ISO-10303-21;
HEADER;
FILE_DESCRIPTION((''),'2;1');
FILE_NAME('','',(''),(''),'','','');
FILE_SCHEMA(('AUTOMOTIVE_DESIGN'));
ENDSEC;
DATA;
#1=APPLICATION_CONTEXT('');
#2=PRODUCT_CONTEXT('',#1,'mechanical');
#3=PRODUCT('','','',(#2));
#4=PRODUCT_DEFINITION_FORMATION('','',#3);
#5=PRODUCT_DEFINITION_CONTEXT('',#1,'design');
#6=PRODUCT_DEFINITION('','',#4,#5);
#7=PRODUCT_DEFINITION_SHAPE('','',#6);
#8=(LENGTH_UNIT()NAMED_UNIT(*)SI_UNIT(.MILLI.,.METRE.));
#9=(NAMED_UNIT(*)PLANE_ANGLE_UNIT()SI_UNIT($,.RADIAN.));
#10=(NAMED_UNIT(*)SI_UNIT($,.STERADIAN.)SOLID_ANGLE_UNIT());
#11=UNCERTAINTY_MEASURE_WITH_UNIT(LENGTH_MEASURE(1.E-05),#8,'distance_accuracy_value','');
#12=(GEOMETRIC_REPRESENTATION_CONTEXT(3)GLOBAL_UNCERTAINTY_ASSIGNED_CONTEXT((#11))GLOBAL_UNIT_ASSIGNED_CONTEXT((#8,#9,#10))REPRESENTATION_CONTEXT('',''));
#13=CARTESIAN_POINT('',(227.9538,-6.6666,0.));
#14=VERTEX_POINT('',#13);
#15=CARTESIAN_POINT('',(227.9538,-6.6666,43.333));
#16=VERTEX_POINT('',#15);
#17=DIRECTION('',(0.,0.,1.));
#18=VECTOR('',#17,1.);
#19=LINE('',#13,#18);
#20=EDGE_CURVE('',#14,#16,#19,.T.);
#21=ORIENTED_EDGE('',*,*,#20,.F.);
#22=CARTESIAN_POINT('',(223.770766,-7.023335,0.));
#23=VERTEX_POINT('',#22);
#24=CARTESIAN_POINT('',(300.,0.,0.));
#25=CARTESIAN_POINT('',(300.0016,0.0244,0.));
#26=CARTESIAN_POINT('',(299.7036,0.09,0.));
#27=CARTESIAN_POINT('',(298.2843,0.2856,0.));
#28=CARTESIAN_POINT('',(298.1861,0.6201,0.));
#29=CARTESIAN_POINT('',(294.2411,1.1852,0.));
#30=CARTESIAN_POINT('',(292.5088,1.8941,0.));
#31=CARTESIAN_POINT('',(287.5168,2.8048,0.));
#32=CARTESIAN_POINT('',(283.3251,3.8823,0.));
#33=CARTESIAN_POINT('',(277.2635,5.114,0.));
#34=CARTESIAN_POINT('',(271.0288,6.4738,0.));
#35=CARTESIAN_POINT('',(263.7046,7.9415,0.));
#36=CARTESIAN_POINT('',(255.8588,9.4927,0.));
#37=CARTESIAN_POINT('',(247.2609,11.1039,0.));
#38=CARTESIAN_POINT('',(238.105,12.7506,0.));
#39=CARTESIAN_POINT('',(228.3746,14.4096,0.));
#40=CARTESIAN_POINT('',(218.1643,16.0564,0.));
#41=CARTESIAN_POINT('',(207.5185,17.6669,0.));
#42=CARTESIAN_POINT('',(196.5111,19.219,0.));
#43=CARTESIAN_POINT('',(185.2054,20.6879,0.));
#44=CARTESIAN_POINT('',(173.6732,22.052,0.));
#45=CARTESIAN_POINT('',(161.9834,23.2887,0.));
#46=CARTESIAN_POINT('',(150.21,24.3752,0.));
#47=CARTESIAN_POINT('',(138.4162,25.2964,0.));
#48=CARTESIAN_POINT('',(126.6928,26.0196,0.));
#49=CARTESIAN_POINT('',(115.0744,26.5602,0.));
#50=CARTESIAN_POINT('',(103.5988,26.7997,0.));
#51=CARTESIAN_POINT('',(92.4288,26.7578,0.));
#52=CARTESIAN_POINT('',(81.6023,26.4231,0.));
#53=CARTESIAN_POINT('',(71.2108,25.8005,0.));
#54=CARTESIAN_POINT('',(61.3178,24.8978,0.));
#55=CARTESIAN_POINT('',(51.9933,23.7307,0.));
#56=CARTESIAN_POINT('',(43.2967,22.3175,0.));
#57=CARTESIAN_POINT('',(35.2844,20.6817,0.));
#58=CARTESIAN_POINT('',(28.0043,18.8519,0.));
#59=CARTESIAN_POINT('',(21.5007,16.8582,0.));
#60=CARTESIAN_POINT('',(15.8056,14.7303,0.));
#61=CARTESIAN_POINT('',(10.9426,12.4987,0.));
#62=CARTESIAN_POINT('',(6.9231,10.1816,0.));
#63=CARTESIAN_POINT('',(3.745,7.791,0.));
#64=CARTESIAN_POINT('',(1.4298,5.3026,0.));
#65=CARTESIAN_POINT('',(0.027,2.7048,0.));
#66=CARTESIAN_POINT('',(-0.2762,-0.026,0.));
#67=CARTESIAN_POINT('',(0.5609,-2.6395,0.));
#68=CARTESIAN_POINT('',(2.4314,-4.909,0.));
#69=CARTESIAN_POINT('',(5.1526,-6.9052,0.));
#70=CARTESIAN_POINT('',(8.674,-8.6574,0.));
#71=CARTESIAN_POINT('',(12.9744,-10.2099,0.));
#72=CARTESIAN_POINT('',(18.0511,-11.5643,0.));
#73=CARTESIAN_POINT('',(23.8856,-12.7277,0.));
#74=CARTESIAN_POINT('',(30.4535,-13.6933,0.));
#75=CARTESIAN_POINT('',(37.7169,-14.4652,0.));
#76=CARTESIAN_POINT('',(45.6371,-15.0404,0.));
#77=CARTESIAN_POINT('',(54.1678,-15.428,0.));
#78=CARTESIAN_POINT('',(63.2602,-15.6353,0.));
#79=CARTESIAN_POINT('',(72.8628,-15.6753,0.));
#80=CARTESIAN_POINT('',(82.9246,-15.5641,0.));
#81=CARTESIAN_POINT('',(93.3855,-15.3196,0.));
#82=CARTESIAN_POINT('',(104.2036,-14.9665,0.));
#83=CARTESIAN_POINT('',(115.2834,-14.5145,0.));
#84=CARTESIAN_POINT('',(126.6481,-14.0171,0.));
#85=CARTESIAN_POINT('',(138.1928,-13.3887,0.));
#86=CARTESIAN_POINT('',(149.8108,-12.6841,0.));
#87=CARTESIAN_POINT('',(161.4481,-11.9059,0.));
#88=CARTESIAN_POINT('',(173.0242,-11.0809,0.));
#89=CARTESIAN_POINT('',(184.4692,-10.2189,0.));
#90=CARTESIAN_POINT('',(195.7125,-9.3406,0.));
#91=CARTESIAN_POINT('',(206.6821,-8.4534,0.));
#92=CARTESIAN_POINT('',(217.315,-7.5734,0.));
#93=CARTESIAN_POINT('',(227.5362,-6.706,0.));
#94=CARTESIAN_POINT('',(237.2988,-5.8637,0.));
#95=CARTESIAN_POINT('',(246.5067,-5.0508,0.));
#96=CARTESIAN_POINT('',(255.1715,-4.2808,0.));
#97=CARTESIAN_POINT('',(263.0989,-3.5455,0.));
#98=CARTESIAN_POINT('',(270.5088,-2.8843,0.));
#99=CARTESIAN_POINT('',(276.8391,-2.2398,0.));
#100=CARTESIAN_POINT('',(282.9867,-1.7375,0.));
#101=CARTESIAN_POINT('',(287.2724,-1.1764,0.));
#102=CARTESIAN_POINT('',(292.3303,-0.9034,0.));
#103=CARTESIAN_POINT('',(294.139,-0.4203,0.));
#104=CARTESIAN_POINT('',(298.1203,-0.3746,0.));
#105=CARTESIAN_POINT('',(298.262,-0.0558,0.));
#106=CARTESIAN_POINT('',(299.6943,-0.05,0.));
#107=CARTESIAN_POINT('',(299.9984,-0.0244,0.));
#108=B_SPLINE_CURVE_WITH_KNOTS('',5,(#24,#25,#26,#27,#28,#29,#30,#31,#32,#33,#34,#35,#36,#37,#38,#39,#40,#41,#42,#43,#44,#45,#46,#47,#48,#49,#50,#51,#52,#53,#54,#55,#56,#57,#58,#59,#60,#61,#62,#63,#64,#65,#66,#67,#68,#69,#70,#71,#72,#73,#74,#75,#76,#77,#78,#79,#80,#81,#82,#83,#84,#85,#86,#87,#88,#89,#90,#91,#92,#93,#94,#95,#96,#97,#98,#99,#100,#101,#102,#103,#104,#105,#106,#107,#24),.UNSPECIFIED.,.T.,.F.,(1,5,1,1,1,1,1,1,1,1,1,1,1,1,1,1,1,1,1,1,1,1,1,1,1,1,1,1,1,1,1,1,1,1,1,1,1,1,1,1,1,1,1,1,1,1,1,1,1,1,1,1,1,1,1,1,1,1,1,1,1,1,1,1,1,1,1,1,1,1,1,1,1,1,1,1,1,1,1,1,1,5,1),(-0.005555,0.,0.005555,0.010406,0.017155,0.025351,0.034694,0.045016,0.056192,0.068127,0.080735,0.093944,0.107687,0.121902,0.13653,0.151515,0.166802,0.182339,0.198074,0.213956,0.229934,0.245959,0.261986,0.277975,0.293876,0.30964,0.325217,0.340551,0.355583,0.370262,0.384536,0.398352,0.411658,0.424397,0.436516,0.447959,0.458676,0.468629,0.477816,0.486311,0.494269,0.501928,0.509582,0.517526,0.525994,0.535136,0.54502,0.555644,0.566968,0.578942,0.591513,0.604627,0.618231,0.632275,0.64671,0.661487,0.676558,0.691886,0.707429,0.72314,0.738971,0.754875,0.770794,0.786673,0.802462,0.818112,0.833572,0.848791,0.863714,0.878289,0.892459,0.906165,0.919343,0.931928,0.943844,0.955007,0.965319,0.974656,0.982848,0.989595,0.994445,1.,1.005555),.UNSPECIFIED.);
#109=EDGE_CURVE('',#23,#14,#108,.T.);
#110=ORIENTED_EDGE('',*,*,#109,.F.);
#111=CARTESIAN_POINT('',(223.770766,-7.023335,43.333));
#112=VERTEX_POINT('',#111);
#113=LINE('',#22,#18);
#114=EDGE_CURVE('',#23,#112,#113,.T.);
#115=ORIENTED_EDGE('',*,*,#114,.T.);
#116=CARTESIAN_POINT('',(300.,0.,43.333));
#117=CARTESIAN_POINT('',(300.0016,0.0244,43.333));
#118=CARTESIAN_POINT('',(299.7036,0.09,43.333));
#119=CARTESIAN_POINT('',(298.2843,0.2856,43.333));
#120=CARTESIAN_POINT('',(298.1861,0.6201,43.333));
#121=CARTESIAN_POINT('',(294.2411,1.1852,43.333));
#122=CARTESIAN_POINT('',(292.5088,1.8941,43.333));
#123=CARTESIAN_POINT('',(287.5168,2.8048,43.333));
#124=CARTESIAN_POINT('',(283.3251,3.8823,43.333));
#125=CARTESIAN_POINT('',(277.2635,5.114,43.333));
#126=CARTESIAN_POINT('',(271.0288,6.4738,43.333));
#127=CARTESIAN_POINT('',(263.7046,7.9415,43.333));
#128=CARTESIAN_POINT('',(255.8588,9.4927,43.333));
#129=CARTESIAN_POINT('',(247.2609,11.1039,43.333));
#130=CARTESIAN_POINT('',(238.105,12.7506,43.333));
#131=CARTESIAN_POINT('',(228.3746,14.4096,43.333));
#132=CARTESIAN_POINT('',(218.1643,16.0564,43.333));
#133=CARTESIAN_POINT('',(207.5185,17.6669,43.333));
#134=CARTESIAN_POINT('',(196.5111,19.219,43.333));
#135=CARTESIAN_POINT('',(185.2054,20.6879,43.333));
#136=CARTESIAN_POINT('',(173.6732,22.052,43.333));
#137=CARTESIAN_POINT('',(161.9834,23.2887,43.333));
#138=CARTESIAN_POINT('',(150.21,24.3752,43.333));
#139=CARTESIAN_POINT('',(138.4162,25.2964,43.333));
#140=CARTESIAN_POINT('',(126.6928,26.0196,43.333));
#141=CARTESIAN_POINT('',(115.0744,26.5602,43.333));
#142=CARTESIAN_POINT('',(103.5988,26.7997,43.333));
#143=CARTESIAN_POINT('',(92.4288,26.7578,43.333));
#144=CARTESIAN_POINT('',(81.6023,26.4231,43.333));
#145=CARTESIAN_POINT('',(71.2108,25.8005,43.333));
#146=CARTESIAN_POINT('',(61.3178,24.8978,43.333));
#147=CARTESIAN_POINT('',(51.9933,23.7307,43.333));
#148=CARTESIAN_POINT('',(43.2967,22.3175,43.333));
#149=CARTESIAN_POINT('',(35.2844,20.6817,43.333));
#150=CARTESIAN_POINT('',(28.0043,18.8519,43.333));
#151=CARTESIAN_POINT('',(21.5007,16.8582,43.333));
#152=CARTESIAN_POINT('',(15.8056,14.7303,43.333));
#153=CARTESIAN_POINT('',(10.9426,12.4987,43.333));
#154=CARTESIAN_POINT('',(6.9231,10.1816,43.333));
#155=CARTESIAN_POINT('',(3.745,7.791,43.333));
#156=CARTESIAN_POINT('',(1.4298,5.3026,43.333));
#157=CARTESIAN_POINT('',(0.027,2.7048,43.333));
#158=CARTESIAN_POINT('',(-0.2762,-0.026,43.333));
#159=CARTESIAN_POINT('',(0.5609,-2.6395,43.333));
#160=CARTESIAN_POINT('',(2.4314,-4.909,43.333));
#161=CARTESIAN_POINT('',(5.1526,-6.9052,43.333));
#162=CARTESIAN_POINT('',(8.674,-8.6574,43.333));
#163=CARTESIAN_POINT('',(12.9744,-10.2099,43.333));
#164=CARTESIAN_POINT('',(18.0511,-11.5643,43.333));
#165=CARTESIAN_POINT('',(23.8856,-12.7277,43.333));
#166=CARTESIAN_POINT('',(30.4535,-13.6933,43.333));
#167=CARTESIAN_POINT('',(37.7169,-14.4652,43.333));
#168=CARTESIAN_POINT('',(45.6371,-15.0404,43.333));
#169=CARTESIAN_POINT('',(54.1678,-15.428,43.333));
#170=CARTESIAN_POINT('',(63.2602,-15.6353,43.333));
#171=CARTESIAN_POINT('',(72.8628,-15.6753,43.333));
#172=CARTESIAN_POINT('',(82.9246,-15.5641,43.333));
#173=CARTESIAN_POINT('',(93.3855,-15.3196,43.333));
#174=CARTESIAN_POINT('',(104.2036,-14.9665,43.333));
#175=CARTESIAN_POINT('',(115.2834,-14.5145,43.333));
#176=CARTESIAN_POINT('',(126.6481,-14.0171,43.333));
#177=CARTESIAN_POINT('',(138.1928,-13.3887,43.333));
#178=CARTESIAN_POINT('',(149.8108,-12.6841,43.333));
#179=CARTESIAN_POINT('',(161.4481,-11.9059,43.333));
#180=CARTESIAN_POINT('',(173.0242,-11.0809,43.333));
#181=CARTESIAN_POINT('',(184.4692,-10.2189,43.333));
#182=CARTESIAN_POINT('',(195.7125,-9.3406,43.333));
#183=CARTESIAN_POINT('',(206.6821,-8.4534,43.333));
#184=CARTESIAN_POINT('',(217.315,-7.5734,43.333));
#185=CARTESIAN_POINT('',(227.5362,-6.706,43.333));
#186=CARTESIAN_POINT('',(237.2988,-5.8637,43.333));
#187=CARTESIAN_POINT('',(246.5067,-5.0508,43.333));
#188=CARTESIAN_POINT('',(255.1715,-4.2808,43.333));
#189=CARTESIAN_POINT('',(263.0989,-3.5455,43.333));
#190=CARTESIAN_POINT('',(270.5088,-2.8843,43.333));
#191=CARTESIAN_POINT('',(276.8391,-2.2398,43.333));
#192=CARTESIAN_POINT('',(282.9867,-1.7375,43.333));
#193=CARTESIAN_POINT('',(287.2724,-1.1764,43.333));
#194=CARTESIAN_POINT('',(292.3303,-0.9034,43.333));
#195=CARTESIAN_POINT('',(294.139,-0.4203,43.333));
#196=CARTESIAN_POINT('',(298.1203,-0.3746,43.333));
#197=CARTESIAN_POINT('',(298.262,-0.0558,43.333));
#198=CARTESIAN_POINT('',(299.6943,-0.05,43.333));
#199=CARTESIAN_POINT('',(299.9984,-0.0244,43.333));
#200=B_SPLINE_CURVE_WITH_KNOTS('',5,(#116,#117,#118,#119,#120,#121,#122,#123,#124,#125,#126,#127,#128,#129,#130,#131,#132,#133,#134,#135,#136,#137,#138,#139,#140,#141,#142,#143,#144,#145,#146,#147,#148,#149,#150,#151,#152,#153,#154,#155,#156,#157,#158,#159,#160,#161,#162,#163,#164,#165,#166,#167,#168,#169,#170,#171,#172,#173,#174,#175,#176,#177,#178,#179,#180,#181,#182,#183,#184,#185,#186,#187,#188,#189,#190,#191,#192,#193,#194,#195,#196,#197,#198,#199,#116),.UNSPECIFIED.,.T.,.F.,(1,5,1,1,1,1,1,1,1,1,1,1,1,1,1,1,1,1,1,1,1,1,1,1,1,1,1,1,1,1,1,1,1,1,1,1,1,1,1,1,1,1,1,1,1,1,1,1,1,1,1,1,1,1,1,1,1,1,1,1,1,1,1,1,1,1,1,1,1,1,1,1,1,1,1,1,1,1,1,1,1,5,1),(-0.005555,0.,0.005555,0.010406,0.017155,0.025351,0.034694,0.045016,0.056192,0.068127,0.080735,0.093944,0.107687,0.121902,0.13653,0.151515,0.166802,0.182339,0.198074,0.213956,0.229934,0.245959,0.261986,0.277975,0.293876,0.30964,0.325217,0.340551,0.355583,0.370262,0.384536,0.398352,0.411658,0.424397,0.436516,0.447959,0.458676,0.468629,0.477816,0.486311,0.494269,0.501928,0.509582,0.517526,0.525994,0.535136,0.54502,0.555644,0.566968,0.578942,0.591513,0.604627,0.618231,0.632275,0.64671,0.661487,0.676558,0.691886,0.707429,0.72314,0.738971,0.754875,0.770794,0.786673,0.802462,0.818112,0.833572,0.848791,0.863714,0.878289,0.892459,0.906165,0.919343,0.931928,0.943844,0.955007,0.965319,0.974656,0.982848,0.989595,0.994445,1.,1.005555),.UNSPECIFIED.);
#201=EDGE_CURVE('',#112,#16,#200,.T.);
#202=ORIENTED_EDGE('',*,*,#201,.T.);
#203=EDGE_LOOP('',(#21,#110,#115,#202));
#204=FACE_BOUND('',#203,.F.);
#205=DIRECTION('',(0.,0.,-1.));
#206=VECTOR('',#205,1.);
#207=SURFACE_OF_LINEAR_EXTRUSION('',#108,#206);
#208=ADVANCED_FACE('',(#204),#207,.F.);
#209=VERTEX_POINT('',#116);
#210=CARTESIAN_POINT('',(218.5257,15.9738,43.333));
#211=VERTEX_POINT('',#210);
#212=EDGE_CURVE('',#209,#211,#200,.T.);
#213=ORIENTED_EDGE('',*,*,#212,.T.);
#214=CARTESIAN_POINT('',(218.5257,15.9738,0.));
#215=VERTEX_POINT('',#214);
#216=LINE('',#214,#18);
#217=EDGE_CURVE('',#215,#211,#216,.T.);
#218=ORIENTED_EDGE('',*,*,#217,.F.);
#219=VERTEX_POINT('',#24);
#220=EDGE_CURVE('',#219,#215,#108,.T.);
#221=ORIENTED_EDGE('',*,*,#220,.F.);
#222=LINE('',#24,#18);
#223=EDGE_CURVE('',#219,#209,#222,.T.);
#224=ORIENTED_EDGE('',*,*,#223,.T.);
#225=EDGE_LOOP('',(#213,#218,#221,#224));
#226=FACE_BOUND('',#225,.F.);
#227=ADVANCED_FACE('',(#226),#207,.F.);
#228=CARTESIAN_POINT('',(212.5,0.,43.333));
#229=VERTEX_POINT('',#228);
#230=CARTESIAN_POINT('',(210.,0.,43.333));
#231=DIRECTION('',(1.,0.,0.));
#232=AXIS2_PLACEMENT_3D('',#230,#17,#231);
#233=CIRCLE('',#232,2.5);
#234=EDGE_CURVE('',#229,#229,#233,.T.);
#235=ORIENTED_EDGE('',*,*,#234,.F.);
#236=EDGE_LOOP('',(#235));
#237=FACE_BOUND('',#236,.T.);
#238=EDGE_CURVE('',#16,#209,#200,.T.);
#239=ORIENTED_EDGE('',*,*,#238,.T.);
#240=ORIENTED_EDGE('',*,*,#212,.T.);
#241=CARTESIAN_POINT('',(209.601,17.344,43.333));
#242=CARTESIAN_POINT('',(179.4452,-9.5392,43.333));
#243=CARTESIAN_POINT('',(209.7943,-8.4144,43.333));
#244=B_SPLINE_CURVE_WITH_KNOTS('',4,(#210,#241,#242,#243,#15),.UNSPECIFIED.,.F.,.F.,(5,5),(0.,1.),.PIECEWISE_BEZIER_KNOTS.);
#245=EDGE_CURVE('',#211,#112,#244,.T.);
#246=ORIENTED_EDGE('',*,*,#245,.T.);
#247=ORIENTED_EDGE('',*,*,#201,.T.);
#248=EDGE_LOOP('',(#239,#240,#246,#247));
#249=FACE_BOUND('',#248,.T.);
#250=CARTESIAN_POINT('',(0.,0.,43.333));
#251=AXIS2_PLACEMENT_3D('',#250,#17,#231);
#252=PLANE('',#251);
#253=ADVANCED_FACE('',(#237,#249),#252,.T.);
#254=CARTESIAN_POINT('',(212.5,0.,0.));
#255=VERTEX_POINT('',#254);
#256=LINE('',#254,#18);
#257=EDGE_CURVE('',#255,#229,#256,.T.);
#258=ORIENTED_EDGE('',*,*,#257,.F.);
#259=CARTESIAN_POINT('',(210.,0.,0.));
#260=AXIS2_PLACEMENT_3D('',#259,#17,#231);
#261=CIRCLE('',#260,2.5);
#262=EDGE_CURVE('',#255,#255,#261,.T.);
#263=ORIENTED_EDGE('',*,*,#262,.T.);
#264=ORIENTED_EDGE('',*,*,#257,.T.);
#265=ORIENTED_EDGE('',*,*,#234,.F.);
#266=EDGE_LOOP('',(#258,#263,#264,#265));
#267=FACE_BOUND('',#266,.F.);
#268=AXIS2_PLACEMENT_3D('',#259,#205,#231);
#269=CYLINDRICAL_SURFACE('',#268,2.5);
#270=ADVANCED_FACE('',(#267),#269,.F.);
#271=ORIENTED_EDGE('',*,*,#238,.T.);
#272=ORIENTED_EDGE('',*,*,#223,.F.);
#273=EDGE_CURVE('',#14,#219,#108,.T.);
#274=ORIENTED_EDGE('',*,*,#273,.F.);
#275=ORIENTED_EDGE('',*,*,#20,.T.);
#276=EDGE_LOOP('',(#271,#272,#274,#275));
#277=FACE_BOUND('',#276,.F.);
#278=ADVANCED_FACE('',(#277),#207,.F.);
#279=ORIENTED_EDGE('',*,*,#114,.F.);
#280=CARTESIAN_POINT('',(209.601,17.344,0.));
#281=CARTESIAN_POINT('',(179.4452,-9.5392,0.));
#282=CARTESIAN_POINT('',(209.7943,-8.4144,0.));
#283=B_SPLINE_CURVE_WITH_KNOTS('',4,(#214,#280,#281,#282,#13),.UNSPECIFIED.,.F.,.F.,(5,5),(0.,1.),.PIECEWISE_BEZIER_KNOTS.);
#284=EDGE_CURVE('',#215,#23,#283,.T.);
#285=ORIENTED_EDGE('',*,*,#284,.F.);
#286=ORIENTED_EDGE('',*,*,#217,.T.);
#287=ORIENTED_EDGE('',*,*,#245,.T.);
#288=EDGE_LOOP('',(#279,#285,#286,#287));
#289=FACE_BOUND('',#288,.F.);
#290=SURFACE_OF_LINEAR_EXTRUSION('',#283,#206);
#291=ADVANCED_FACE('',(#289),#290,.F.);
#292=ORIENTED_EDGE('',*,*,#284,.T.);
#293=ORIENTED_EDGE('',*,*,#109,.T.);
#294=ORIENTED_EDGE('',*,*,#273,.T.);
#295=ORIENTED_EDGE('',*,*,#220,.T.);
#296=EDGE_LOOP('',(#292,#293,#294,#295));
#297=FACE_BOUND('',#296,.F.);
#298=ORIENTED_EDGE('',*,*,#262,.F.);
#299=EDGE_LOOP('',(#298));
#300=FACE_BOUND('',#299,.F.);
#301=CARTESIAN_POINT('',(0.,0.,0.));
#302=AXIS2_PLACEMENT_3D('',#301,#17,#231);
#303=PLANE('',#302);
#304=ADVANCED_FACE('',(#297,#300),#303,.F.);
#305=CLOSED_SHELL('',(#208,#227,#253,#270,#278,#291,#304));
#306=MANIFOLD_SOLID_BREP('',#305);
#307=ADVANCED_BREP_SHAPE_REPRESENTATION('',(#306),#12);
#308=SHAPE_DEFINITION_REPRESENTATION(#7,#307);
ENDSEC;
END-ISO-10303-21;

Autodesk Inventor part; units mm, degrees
ref_plane "YZ Plane" through (0, 0, 0) normal (1, 0, 0) x (0, 1, 0)
ref_plane "XZ Plane" through (0, 0, 0) normal (0, 1, 0) x (-1, 0, 0)
ref_plane "XY Plane" through (0, 0, 0) normal (0, 0, 1) x (1, 0, 0)
sketch "Sketch1" plane through (0, 0, 0) normal (0, 0, 1) x (1, 0, 0)
  spline S0 degree 5 poles (300, 0) (300.0016, 0.0244) (299.7036, 0.09) (298.2843, 0.2856) (298.1861, 0.6201) (294.2411, 1.1852) (292.5088, 1.8941) (287.5168, 2.8048) (283.3251, 3.8823) (277.2635, 5.114) (271.0288, 6.4738) (263.7046, 7.9415) (255.8588, 9.4927) (247.2609, 11.1039) (238.105, 12.7506) (228.3746, 14.4096) (218.1643, 16.0564) (207.5185, 17.6669) (196.5111, 19.219) (185.2054, 20.6879) (173.6732, 22.052) (161.9834, 23.2887) (150.21, 24.3752) (138.4162, 25.2964) (126.6928, 26.0196) (115.0744, 26.5602) (103.5988, 26.7997) (92.4288, 26.7578) (81.6023, 26.4231) (71.2108, 25.8005) (61.3178, 24.8978) (51.9933, 23.7307) (43.2967, 22.3175) (35.2844, 20.6817) (28.0043, 18.8519) (21.5007, 16.8582) (15.8056, 14.7303) (10.9426, 12.4987) (6.9231, 10.1816) (3.745, 7.791) (1.4298, 5.3026) (0.027, 2.7048) (-0.2762, -0.026) (0.5609, -2.6395) (2.4314, -4.909) (5.1526, -6.9052) (8.674, -8.6574) (12.9744, -10.2099) (18.0511, -11.5643) (23.8856, -12.7277) (30.4535, -13.6933) (37.7169, -14.4652) (45.6371, -15.0404) (54.1678, -15.428) (63.2602, -15.6353) (72.8628, -15.6753) (82.9246, -15.5641) (93.3855, -15.3196) (104.2036, -14.9665) (115.2834, -14.5145) (126.6481, -14.0171) (138.1928, -13.3887) (149.8108, -12.6841) (161.4481, -11.9059) (173.0242, -11.0809) (184.4692, -10.2189) (195.7125, -9.3406) (206.6821, -8.4534) (217.315, -7.5734) (227.5362, -6.706) (237.2988, -5.8637) (246.5067, -5.0508) (255.1715, -4.2808) (263.0989, -3.5455) (270.5088, -2.8843) (276.8391, -2.2398) (282.9867, -1.7375) (287.2724, -1.1764) (292.3303, -0.9034) (294.139, -0.4203) (298.1203, -0.3746) (298.262, -0.0558) (299.6943, -0.05) (299.9984, -0.0244) (300, 0) knots 0 0 0 0 0 0 0.005555 0.010406 0.017155 0.025351 0.034694 0.045016 0.056192 0.068127 0.080735 0.093944 0.107687 0.121902 0.13653 0.151515 0.166802 0.182339 0.198074 0.213956 0.229934 0.245959 0.261986 0.277975 0.293876 0.30964 0.325217 0.340551 0.355583 0.370262 0.384536 0.398352 0.411658 0.424397 0.436516 0.447959 0.458676 0.468629 0.477816 0.486311 0.494269 0.501928 0.509582 0.517526 0.525994 0.535136 0.54502 0.555644 0.566968 0.578942 0.591513 0.604627 0.618231 0.632275 0.64671 0.661487 0.676558 0.691886 0.707429 0.72314 0.738971 0.754875 0.770794 0.786673 0.802462 0.818112 0.833572 0.848791 0.863714 0.878289 0.892459 0.906165 0.919343 0.931928 0.943844 0.955007 0.965319 0.974656 0.982848 0.989595 0.994445 1 1 1 1 1 1
  line L0 (200, 103) -> (200, -97) construction
  line L1 (0, -164.4758) -> (0, 307.8549) construction
  line L2 (210, 0) -> (210, -12) construction
  line L3 (210, 0) -> (222, 0) construction
  spline S1 degree 4 poles (218.5257, 15.9738) (209.601, 17.344) (179.4452, -9.5392) (209.7943, -8.4144) (227.9538, -6.6666) knots 0 0 0 0 0 1 1 1 1 1
  line L4 (221.1774, 15.5667) -> (215.874, 16.3809) construction
  arc A0 (220.2542, 15.1852) -> (216.6402, 15.74) centre (217.9961, 12.5243) ccw construction
  line L5 (222.2571, -7.2149) -> (233.6505, -6.1183) construction
  arc A1 (223.3931, -7.0631) -> (232.5064, -6.186) centre (204.1762, 240.3791) ccw construction
  circle A2 centre (210, 0) radius 2.5
  point P0 (0, 0)
  point P1 (298.1739, 0.4338)
  point P2 (295.9008, 0.9681)
  point P3 (292.7367, 1.7025)
  point P4 (288.6996, 2.6229)
  point P5 (283.8129, 3.7134)
  point P6 (278.1048, 4.9545)
  point P7 (271.6086, 6.3255)
  point P8 (264.3621, 7.8039)
  point P9 (256.4085, 9.3663)
  point P10 (247.7946, 10.9887)
  point P11 (238.572, 12.6468)
  point P12 (228.7959, 14.3166)
  point P13 (207.8235, 17.5944)
  point P14 (196.755, 19.155)
  point P15 (185.388, 20.6319)
  point P16 (173.7924, 22.0023)
  point P17 (162.0405, 23.2434)
  point P18 (150.2055, 24.3336)
  point P19 (138.3615, 25.2522)
  point P20 (126.5832, 25.98)
  point P21 (114.8976, 26.493)
  point P22 (103.3635, 26.7315)
  point P23 (92.1183, 26.6775)
  point P24 (81.2367, 26.3292)
  point P25 (70.7922, 25.689)
  point P26 (60.8541, 24.7656)
  point P27 (51.489, 23.5734)
  point P28 (42.7587, 22.131)
  point P29 (34.7199, 20.4618)
  point P30 (27.4239, 18.5934)
  point P31 (20.9172, 16.5555)
  point P32 (15.2385, 14.379)
  point P33 (10.422, 12.0954)
  point P34 (6.4944, 9.7347)
  point P35 (3.4767, 7.3239)
  point P36 (1.3836, 4.8867)
  point P37 (0.2238, 2.4411)
  point P38 (0, 0)
  point P39 (0.7011, -2.3487)
  point P40 (2.31, -4.5201)
  point P41 (4.8123, -6.5094)
  point P42 (8.1885, -8.3112)
  point P43 (12.414, -9.9204)
  point P44 (17.4594, -11.3319)
  point P45 (23.2908, -12.5418)
  point P46 (29.871, -13.5477)
  point P47 (37.1583, -14.3505)
  point P48 (45.1092, -14.9526)
  point P49 (53.6766, -15.3609)
  point P50 (62.8101, -15.5853)
  point P51 (72.4581, -15.639)
  point P52 (82.566, -15.5385)
  point P53 (93.0768, -15.3033)
  point P54 (103.9314, -14.9544)
  point P55 (115.0689, -14.514)
  point P56 (126.4866, -13.9956)
  point P57 (138.1008, -13.3755)
  point P58 (149.7945, -12.6672)
  point P59 (161.4972, -11.8896)
  point P60 (173.1378, -11.061)
  point P61 (184.6455, -10.1973)
  point P62 (195.9501, -9.3141)
  point P63 (206.9814, -8.4237)
  point P64 (217.6716, -7.5381)
  point P65 (227.9538, -6.6666)
  point P66 (237.7638, -5.8185)
  point P67 (247.0398, -5.0019)
  point P68 (255.7236, -4.2234)
  point P69 (263.7597, -3.4905)
  point P70 (271.0965, -2.8098)
  point P71 (277.6872, -2.1882)
  point P72 (283.4889, -1.6323)
  point P73 (288.4641, -1.1487)
  point P74 (292.5804, -0.7434)
  point P75 (295.8102, -0.4221)
  point P76 (298.1328, -0.1887)
  point P77 (299.5323, -0.0474)
  point P78 (200, 0)
  point P79 (223.7705, -7.0234)
  dimension "d0" = 200
  dimension "d2" = 200
  dimension "d3" = 12
  dimension "d4" = 90
  dimension "d5" = 10
  dimension "d17" = 5
extrude "Extrusion2" add sketch "Sketch1" along normal blind 43.333 contours S0 S1 picked at (264.3061, 0.3433)
properties part number "4P.01.01.01-TW-v1-Flap Shape Definition"
